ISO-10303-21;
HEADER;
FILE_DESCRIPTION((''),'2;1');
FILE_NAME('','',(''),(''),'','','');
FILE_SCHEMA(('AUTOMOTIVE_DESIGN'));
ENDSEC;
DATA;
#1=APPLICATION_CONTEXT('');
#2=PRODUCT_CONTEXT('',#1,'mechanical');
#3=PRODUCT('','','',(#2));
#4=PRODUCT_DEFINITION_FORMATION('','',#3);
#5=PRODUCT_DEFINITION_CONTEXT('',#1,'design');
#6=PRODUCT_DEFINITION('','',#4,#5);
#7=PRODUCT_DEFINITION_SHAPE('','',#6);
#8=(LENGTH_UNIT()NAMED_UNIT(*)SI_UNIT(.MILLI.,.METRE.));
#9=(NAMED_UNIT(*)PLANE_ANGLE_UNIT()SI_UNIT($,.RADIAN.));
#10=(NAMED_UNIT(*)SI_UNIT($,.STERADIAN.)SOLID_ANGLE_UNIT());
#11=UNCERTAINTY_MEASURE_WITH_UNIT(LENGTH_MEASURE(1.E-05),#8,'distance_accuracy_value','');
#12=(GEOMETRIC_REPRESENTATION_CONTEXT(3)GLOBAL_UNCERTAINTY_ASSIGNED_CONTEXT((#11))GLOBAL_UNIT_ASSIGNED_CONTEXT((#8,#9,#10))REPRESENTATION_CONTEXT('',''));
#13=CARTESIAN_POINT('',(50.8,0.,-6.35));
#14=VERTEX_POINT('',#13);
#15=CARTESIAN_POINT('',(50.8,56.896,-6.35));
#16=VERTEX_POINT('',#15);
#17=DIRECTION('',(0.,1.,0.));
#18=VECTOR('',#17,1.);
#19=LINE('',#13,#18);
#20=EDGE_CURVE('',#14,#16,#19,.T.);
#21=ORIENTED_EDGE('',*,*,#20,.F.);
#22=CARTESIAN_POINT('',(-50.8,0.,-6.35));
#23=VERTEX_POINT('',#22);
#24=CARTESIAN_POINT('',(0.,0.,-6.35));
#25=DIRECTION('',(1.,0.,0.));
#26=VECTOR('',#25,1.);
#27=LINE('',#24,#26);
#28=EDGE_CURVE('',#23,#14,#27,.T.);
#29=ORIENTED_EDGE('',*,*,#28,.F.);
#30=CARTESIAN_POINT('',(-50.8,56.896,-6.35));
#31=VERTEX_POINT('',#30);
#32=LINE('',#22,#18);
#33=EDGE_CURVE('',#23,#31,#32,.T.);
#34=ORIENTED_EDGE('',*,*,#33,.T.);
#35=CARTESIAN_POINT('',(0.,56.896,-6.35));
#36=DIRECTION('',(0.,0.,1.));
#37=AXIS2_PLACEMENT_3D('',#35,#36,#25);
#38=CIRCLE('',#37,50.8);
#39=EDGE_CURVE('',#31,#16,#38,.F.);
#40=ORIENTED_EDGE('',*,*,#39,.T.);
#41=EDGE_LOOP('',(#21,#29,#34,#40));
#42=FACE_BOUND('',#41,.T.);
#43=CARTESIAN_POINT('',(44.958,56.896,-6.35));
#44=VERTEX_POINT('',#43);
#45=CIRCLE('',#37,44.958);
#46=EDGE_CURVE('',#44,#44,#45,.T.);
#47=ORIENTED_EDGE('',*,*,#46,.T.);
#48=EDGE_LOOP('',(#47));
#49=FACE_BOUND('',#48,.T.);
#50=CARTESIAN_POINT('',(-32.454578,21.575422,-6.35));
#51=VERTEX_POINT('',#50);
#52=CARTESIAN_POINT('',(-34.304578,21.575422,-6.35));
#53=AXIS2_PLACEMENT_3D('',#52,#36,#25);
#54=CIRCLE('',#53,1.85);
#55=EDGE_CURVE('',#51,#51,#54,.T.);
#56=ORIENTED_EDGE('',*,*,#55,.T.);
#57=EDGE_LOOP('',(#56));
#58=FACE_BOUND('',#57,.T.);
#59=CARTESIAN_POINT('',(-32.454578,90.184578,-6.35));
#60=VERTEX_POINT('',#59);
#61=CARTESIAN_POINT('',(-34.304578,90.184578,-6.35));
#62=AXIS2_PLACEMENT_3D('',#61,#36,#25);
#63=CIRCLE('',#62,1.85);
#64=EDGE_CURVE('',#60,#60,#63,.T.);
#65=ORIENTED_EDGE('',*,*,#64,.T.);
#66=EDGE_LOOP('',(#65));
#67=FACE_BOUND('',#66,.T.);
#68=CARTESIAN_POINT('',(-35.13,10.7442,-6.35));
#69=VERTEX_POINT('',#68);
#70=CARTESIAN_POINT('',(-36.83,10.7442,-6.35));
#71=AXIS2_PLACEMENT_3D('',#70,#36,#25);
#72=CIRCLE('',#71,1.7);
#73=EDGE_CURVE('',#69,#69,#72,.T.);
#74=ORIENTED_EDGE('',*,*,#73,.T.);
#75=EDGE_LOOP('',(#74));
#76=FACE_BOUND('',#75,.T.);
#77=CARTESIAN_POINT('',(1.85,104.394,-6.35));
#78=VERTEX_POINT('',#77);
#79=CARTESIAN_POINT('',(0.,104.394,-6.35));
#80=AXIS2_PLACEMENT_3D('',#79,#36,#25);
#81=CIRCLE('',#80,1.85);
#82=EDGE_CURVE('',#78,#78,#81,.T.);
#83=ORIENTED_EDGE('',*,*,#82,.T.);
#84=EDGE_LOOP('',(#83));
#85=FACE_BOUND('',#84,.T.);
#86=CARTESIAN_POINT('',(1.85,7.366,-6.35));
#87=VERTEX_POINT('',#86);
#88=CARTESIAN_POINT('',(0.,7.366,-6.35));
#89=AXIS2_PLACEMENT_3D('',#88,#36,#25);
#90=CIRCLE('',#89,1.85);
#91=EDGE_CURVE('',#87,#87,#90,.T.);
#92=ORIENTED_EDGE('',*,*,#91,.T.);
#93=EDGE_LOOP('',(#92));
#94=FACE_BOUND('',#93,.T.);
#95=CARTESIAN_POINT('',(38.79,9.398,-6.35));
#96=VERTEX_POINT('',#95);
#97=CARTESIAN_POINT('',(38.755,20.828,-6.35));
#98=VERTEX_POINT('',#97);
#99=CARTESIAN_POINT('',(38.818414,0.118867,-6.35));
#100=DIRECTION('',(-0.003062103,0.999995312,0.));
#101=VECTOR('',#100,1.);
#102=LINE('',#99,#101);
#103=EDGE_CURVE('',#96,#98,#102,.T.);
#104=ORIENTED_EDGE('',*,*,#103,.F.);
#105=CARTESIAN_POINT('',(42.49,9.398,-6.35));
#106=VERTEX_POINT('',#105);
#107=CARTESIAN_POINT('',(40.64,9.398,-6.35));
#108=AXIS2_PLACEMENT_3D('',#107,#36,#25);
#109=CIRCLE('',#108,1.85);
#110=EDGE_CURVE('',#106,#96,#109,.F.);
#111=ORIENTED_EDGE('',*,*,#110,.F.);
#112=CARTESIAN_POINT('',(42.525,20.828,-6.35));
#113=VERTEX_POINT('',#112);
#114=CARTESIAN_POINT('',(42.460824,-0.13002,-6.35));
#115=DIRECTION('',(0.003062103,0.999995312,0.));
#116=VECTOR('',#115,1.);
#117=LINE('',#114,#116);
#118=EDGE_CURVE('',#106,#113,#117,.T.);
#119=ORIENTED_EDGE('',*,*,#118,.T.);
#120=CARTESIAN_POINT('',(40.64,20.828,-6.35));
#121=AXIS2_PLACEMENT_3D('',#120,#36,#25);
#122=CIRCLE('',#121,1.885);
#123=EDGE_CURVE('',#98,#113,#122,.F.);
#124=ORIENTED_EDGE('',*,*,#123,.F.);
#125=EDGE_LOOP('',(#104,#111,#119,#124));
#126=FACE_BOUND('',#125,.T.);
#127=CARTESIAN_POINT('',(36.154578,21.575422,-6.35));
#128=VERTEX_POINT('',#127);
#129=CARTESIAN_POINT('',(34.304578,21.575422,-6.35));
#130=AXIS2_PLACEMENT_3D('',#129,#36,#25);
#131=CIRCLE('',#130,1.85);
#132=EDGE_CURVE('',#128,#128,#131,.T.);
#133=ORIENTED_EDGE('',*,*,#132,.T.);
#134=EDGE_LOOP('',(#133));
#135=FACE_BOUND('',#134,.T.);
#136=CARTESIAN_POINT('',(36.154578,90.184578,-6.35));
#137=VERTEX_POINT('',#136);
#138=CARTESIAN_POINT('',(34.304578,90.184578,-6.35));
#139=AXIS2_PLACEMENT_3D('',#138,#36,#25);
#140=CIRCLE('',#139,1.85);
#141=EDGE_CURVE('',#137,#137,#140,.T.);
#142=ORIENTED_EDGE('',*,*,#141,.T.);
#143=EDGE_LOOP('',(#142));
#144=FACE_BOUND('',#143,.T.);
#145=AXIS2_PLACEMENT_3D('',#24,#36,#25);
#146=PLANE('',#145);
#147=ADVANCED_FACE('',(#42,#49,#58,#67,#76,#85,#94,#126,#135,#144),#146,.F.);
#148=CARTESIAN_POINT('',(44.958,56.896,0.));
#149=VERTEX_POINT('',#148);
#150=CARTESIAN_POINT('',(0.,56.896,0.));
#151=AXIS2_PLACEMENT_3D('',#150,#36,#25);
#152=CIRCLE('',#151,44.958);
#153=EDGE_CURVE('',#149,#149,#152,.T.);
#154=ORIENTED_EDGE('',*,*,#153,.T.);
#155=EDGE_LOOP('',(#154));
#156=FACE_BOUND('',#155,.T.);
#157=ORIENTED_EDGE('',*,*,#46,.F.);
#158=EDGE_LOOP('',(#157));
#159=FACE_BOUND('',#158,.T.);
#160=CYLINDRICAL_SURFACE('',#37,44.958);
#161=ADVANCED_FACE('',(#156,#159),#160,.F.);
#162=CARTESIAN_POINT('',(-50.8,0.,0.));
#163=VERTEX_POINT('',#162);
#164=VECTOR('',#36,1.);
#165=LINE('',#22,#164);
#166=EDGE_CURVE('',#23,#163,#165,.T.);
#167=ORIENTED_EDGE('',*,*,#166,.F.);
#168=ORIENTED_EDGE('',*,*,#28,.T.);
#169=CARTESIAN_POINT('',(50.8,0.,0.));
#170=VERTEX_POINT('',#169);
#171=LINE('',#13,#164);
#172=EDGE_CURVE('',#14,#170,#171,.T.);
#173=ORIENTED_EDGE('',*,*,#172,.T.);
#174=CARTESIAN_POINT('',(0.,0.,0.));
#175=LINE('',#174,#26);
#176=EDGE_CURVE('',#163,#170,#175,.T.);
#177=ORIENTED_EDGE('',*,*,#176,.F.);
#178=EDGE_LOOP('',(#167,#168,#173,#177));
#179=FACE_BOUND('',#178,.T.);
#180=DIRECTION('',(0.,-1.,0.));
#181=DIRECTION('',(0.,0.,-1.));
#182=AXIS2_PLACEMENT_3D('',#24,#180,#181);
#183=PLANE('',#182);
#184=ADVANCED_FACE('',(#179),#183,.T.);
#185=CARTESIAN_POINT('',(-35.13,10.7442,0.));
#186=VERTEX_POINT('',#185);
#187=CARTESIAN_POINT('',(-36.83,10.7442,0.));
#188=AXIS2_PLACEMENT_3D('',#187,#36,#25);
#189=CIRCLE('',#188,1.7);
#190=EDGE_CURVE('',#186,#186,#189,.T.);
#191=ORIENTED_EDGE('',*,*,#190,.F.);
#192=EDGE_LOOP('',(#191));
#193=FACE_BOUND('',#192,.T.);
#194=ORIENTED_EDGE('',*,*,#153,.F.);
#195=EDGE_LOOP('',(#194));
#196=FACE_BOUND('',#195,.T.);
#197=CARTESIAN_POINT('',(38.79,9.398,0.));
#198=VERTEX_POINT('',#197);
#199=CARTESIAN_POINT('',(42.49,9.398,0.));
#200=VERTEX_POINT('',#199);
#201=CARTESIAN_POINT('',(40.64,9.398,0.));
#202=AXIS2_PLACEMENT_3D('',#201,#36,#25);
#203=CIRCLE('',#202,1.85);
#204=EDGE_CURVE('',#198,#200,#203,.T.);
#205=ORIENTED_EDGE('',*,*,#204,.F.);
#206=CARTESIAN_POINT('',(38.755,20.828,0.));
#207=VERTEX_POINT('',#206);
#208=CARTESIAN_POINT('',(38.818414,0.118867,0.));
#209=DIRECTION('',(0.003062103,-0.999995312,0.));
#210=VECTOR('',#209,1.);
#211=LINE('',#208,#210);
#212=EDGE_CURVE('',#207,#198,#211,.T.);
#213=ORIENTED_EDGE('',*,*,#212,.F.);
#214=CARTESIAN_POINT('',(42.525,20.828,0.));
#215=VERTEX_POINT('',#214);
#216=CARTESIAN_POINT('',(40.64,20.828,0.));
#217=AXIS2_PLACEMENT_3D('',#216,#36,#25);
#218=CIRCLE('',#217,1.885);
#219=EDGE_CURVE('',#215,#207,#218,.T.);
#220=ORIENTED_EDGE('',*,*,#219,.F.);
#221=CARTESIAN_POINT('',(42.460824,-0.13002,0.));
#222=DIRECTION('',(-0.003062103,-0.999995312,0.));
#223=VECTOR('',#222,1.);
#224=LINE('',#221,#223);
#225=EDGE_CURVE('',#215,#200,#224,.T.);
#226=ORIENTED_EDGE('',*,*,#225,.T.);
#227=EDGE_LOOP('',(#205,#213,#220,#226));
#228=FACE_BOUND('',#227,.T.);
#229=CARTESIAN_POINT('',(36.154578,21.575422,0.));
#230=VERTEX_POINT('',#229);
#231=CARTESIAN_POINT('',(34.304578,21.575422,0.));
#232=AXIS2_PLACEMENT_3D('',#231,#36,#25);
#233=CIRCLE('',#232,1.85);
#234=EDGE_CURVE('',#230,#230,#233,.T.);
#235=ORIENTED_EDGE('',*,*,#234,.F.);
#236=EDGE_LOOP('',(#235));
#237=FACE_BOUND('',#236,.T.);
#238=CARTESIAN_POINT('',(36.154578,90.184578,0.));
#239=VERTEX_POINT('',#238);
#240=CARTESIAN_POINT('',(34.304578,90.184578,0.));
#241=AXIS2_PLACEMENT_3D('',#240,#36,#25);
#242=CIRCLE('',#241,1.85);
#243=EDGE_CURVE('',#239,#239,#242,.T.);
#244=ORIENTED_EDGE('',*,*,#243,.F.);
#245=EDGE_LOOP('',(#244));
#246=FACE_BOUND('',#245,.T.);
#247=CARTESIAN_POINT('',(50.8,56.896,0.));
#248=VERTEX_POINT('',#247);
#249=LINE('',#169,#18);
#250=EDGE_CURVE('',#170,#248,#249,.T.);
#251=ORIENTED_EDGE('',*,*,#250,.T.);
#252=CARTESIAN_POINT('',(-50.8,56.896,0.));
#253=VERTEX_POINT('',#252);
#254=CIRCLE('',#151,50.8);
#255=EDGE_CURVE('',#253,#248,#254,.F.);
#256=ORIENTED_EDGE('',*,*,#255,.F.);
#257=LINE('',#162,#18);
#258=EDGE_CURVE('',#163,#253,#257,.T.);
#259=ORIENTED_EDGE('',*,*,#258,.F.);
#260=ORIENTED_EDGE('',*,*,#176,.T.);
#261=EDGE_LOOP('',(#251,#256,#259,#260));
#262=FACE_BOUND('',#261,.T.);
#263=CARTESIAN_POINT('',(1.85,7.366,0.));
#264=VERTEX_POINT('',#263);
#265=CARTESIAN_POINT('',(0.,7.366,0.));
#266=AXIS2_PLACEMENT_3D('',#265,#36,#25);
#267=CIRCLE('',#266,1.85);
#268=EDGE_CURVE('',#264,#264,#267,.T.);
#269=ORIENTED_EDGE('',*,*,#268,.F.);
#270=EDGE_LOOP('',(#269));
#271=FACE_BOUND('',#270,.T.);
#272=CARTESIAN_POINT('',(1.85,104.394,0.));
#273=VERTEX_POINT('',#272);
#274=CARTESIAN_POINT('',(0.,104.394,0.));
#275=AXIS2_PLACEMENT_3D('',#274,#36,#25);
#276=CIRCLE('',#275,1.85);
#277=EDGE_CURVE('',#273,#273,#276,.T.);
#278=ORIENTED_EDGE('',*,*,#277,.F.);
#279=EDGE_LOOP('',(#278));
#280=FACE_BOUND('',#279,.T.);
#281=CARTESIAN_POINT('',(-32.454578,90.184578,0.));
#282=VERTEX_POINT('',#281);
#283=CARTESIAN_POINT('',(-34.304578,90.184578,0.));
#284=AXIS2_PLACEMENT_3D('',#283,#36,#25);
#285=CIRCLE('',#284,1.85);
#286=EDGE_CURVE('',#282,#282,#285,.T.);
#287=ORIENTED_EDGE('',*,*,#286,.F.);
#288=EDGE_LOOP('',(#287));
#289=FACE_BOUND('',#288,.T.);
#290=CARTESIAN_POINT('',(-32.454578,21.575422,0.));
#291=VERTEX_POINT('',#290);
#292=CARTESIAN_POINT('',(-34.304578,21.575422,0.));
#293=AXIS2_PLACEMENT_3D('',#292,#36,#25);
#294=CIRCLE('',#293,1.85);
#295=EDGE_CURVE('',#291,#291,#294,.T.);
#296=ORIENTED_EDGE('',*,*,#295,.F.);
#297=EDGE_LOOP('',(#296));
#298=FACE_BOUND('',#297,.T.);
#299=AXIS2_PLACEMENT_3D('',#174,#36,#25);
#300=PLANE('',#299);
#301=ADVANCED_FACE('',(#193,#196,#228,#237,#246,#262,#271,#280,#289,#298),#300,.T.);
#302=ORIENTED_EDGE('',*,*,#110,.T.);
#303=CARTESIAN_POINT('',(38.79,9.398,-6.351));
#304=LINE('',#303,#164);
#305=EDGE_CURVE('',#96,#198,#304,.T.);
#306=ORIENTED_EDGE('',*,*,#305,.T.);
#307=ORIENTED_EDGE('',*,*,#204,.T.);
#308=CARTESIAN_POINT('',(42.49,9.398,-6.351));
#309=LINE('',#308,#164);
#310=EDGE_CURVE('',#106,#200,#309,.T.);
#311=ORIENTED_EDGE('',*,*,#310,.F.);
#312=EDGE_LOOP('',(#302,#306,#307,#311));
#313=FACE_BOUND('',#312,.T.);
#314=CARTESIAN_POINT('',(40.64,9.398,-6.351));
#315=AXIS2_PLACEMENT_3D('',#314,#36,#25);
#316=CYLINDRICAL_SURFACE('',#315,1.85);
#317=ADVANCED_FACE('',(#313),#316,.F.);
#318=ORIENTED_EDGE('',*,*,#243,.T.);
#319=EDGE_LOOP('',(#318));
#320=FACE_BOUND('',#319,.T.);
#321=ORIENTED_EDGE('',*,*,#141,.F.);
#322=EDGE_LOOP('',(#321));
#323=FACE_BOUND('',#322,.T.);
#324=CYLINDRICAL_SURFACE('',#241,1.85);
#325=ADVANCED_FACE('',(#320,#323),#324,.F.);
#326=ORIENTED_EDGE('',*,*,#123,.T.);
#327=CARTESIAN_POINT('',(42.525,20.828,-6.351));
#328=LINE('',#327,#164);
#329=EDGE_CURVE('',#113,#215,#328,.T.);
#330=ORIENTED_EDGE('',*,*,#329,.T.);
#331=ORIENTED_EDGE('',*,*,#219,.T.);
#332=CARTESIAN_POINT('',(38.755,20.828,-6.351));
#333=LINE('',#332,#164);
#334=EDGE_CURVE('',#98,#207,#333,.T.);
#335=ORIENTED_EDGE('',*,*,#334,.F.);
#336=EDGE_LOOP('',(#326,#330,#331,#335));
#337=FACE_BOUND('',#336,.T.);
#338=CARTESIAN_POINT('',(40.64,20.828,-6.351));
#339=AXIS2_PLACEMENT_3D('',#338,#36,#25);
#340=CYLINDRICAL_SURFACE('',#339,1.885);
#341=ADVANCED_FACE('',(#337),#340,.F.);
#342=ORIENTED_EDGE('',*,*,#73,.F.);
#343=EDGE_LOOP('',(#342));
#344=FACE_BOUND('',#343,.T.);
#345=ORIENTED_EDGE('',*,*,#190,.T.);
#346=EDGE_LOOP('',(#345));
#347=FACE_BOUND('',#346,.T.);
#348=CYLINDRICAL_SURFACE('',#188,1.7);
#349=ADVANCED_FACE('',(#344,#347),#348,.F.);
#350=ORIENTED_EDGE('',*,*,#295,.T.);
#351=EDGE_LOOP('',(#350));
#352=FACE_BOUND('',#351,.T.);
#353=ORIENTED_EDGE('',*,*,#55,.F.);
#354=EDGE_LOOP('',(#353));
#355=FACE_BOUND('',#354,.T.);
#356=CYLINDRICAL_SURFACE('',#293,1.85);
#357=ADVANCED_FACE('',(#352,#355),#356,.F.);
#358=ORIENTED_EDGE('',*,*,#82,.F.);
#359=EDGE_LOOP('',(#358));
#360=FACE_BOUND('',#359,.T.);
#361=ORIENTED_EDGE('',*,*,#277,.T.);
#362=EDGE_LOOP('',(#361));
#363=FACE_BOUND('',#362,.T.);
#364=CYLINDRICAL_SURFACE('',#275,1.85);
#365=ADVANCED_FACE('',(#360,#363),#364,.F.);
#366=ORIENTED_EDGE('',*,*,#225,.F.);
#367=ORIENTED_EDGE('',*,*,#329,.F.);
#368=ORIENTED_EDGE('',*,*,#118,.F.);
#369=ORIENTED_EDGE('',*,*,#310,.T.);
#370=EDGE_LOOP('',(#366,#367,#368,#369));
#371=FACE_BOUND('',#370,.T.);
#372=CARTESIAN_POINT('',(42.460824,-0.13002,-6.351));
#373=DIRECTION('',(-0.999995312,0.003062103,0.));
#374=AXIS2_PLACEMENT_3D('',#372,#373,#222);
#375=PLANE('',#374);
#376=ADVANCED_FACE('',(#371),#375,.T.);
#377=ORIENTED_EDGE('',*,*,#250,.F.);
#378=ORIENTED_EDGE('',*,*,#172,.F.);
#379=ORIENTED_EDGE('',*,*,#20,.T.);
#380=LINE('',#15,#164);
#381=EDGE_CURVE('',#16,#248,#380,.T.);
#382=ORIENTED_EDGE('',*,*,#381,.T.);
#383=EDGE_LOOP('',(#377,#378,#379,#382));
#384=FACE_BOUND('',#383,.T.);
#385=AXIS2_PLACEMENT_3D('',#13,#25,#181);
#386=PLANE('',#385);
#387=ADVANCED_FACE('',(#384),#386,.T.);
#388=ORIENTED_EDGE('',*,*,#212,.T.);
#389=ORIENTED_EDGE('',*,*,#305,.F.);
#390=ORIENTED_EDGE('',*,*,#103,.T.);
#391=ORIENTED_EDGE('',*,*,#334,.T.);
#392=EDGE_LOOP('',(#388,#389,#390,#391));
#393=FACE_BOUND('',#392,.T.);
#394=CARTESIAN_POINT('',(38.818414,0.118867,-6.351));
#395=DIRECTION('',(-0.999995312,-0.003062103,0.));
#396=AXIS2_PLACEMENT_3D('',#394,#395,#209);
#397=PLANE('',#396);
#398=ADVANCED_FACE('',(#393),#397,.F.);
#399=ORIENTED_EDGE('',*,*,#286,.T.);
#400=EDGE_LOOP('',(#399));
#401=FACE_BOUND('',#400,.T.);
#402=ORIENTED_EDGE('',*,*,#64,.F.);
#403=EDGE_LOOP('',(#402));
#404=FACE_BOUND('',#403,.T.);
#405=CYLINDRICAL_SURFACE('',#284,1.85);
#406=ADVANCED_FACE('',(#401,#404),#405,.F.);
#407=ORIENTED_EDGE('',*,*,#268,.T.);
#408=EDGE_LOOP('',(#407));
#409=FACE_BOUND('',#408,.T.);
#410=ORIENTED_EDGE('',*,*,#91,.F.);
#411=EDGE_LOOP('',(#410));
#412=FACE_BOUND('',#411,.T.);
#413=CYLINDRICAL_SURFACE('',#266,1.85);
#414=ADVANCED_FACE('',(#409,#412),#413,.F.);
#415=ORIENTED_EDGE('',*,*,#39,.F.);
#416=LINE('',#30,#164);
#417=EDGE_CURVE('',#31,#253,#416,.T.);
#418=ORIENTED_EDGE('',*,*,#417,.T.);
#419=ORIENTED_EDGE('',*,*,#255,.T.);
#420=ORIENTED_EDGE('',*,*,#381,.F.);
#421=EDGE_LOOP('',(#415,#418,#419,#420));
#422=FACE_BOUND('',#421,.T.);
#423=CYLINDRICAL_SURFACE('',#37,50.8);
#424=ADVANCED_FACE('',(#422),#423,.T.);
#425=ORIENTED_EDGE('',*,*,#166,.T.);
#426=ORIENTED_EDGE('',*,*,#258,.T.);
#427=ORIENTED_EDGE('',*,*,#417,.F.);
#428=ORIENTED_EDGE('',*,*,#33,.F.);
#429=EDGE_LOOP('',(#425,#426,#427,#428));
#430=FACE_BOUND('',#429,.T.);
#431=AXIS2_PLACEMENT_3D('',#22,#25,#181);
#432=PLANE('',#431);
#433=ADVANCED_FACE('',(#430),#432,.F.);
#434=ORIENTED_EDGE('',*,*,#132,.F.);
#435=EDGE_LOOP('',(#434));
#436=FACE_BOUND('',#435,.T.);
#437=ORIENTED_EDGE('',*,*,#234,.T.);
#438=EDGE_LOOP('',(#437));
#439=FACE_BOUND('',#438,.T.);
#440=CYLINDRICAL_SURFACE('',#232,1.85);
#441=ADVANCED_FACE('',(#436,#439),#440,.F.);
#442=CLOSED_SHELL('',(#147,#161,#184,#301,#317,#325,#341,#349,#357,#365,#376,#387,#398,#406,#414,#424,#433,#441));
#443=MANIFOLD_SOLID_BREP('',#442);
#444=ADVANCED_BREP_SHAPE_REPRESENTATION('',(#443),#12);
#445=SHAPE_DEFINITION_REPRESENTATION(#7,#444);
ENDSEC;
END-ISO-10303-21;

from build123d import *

# Parameters (mm, degrees)
SKETCH1_R                = 44.958
BOSS_EXTRUDE1_DEPTH      = 6.35
M3_CLEARANCE_HOLE2_D     = 3.4
M3_CLEARANCE_HOLE2_DEPTH = 25.4
M3_CLEARANCE_HOLE2_TIP   = 1.021463052
M3_CLEARANCE_HOLE3_D     = 3.7
M3_CLEARANCE_HOLE3_DEPTH = 25.4
M3_CLEARANCE_HOLE3_TIP   = 1.111592145
CUT_EXTRUDE1_START       = -6.35
CUT_EXTRUDE1_DEPTH       = 6.35


# Read off the part's stored shape, not the designer's step: Cut-Extrude1
with BuildPart() as part:
    # Sketch1 → Boss-Extrude1 (new body)
    with BuildSketch(Plane.XY):
        with BuildLine():
            Line((50.8, 0), (50.8, 56.896))
            ThreePointArc((50.8, 56.896), (0, 107.696), (-50.8, 56.896))
            Line((-50.8, 56.896), (-50.8, 0))
            Line((-50.8, 0), (50.8, 0))
        make_face()
        with Locations((0, 56.896)):
            Circle(SKETCH1_R, mode=Mode.SUBTRACT)
    extrude(amount=-BOSS_EXTRUDE1_DEPTH)

    # M3 Clearance Hole2
    with Locations(Plane.XY):
        with Locations((-36.83, 10.7442)):
            Hole(M3_CLEARANCE_HOLE2_D / 2, depth=M3_CLEARANCE_HOLE2_DEPTH)
            with Locations((0, 0, -(M3_CLEARANCE_HOLE2_DEPTH + M3_CLEARANCE_HOLE2_TIP / 2))):  # 118° drill point
                Cone(0, M3_CLEARANCE_HOLE2_D / 2, M3_CLEARANCE_HOLE2_TIP, mode=Mode.SUBTRACT)

    # M3 Clearance Hole3
    with Locations(Plane.XY):
        with Locations((0, 104.394), (34.304578382, 90.184578382), (34.304578383, 21.575421618), (0, 7.366), (-34.304578382, 21.575421618), (-34.304578382, 90.184578382)):
            Hole(M3_CLEARANCE_HOLE3_D / 2, depth=M3_CLEARANCE_HOLE3_DEPTH)
            with Locations((0, 0, -(M3_CLEARANCE_HOLE3_DEPTH + M3_CLEARANCE_HOLE3_TIP / 2))):  # 118° drill point
                Cone(0, M3_CLEARANCE_HOLE3_D / 2, M3_CLEARANCE_HOLE3_TIP, mode=Mode.SUBTRACT)

    # Cut-Extrude1 outline → Cut-Extrude1 (cut)
    with BuildSketch(Plane.XY.offset(CUT_EXTRUDE1_START)):
        with BuildLine():
            Line((42.49, 9.398), (42.525, 20.828))
            ThreePointArc((42.525, 20.828), (40.64, 22.713), (38.755, 20.828))
            Line((38.755, 20.828), (38.79, 9.398))
            ThreePointArc((38.79, 9.398), (40.64, 7.548), (42.49, 9.398))
        make_face()
    extrude(amount=CUT_EXTRUDE1_DEPTH, mode=Mode.SUBTRACT)


solid = part.part
